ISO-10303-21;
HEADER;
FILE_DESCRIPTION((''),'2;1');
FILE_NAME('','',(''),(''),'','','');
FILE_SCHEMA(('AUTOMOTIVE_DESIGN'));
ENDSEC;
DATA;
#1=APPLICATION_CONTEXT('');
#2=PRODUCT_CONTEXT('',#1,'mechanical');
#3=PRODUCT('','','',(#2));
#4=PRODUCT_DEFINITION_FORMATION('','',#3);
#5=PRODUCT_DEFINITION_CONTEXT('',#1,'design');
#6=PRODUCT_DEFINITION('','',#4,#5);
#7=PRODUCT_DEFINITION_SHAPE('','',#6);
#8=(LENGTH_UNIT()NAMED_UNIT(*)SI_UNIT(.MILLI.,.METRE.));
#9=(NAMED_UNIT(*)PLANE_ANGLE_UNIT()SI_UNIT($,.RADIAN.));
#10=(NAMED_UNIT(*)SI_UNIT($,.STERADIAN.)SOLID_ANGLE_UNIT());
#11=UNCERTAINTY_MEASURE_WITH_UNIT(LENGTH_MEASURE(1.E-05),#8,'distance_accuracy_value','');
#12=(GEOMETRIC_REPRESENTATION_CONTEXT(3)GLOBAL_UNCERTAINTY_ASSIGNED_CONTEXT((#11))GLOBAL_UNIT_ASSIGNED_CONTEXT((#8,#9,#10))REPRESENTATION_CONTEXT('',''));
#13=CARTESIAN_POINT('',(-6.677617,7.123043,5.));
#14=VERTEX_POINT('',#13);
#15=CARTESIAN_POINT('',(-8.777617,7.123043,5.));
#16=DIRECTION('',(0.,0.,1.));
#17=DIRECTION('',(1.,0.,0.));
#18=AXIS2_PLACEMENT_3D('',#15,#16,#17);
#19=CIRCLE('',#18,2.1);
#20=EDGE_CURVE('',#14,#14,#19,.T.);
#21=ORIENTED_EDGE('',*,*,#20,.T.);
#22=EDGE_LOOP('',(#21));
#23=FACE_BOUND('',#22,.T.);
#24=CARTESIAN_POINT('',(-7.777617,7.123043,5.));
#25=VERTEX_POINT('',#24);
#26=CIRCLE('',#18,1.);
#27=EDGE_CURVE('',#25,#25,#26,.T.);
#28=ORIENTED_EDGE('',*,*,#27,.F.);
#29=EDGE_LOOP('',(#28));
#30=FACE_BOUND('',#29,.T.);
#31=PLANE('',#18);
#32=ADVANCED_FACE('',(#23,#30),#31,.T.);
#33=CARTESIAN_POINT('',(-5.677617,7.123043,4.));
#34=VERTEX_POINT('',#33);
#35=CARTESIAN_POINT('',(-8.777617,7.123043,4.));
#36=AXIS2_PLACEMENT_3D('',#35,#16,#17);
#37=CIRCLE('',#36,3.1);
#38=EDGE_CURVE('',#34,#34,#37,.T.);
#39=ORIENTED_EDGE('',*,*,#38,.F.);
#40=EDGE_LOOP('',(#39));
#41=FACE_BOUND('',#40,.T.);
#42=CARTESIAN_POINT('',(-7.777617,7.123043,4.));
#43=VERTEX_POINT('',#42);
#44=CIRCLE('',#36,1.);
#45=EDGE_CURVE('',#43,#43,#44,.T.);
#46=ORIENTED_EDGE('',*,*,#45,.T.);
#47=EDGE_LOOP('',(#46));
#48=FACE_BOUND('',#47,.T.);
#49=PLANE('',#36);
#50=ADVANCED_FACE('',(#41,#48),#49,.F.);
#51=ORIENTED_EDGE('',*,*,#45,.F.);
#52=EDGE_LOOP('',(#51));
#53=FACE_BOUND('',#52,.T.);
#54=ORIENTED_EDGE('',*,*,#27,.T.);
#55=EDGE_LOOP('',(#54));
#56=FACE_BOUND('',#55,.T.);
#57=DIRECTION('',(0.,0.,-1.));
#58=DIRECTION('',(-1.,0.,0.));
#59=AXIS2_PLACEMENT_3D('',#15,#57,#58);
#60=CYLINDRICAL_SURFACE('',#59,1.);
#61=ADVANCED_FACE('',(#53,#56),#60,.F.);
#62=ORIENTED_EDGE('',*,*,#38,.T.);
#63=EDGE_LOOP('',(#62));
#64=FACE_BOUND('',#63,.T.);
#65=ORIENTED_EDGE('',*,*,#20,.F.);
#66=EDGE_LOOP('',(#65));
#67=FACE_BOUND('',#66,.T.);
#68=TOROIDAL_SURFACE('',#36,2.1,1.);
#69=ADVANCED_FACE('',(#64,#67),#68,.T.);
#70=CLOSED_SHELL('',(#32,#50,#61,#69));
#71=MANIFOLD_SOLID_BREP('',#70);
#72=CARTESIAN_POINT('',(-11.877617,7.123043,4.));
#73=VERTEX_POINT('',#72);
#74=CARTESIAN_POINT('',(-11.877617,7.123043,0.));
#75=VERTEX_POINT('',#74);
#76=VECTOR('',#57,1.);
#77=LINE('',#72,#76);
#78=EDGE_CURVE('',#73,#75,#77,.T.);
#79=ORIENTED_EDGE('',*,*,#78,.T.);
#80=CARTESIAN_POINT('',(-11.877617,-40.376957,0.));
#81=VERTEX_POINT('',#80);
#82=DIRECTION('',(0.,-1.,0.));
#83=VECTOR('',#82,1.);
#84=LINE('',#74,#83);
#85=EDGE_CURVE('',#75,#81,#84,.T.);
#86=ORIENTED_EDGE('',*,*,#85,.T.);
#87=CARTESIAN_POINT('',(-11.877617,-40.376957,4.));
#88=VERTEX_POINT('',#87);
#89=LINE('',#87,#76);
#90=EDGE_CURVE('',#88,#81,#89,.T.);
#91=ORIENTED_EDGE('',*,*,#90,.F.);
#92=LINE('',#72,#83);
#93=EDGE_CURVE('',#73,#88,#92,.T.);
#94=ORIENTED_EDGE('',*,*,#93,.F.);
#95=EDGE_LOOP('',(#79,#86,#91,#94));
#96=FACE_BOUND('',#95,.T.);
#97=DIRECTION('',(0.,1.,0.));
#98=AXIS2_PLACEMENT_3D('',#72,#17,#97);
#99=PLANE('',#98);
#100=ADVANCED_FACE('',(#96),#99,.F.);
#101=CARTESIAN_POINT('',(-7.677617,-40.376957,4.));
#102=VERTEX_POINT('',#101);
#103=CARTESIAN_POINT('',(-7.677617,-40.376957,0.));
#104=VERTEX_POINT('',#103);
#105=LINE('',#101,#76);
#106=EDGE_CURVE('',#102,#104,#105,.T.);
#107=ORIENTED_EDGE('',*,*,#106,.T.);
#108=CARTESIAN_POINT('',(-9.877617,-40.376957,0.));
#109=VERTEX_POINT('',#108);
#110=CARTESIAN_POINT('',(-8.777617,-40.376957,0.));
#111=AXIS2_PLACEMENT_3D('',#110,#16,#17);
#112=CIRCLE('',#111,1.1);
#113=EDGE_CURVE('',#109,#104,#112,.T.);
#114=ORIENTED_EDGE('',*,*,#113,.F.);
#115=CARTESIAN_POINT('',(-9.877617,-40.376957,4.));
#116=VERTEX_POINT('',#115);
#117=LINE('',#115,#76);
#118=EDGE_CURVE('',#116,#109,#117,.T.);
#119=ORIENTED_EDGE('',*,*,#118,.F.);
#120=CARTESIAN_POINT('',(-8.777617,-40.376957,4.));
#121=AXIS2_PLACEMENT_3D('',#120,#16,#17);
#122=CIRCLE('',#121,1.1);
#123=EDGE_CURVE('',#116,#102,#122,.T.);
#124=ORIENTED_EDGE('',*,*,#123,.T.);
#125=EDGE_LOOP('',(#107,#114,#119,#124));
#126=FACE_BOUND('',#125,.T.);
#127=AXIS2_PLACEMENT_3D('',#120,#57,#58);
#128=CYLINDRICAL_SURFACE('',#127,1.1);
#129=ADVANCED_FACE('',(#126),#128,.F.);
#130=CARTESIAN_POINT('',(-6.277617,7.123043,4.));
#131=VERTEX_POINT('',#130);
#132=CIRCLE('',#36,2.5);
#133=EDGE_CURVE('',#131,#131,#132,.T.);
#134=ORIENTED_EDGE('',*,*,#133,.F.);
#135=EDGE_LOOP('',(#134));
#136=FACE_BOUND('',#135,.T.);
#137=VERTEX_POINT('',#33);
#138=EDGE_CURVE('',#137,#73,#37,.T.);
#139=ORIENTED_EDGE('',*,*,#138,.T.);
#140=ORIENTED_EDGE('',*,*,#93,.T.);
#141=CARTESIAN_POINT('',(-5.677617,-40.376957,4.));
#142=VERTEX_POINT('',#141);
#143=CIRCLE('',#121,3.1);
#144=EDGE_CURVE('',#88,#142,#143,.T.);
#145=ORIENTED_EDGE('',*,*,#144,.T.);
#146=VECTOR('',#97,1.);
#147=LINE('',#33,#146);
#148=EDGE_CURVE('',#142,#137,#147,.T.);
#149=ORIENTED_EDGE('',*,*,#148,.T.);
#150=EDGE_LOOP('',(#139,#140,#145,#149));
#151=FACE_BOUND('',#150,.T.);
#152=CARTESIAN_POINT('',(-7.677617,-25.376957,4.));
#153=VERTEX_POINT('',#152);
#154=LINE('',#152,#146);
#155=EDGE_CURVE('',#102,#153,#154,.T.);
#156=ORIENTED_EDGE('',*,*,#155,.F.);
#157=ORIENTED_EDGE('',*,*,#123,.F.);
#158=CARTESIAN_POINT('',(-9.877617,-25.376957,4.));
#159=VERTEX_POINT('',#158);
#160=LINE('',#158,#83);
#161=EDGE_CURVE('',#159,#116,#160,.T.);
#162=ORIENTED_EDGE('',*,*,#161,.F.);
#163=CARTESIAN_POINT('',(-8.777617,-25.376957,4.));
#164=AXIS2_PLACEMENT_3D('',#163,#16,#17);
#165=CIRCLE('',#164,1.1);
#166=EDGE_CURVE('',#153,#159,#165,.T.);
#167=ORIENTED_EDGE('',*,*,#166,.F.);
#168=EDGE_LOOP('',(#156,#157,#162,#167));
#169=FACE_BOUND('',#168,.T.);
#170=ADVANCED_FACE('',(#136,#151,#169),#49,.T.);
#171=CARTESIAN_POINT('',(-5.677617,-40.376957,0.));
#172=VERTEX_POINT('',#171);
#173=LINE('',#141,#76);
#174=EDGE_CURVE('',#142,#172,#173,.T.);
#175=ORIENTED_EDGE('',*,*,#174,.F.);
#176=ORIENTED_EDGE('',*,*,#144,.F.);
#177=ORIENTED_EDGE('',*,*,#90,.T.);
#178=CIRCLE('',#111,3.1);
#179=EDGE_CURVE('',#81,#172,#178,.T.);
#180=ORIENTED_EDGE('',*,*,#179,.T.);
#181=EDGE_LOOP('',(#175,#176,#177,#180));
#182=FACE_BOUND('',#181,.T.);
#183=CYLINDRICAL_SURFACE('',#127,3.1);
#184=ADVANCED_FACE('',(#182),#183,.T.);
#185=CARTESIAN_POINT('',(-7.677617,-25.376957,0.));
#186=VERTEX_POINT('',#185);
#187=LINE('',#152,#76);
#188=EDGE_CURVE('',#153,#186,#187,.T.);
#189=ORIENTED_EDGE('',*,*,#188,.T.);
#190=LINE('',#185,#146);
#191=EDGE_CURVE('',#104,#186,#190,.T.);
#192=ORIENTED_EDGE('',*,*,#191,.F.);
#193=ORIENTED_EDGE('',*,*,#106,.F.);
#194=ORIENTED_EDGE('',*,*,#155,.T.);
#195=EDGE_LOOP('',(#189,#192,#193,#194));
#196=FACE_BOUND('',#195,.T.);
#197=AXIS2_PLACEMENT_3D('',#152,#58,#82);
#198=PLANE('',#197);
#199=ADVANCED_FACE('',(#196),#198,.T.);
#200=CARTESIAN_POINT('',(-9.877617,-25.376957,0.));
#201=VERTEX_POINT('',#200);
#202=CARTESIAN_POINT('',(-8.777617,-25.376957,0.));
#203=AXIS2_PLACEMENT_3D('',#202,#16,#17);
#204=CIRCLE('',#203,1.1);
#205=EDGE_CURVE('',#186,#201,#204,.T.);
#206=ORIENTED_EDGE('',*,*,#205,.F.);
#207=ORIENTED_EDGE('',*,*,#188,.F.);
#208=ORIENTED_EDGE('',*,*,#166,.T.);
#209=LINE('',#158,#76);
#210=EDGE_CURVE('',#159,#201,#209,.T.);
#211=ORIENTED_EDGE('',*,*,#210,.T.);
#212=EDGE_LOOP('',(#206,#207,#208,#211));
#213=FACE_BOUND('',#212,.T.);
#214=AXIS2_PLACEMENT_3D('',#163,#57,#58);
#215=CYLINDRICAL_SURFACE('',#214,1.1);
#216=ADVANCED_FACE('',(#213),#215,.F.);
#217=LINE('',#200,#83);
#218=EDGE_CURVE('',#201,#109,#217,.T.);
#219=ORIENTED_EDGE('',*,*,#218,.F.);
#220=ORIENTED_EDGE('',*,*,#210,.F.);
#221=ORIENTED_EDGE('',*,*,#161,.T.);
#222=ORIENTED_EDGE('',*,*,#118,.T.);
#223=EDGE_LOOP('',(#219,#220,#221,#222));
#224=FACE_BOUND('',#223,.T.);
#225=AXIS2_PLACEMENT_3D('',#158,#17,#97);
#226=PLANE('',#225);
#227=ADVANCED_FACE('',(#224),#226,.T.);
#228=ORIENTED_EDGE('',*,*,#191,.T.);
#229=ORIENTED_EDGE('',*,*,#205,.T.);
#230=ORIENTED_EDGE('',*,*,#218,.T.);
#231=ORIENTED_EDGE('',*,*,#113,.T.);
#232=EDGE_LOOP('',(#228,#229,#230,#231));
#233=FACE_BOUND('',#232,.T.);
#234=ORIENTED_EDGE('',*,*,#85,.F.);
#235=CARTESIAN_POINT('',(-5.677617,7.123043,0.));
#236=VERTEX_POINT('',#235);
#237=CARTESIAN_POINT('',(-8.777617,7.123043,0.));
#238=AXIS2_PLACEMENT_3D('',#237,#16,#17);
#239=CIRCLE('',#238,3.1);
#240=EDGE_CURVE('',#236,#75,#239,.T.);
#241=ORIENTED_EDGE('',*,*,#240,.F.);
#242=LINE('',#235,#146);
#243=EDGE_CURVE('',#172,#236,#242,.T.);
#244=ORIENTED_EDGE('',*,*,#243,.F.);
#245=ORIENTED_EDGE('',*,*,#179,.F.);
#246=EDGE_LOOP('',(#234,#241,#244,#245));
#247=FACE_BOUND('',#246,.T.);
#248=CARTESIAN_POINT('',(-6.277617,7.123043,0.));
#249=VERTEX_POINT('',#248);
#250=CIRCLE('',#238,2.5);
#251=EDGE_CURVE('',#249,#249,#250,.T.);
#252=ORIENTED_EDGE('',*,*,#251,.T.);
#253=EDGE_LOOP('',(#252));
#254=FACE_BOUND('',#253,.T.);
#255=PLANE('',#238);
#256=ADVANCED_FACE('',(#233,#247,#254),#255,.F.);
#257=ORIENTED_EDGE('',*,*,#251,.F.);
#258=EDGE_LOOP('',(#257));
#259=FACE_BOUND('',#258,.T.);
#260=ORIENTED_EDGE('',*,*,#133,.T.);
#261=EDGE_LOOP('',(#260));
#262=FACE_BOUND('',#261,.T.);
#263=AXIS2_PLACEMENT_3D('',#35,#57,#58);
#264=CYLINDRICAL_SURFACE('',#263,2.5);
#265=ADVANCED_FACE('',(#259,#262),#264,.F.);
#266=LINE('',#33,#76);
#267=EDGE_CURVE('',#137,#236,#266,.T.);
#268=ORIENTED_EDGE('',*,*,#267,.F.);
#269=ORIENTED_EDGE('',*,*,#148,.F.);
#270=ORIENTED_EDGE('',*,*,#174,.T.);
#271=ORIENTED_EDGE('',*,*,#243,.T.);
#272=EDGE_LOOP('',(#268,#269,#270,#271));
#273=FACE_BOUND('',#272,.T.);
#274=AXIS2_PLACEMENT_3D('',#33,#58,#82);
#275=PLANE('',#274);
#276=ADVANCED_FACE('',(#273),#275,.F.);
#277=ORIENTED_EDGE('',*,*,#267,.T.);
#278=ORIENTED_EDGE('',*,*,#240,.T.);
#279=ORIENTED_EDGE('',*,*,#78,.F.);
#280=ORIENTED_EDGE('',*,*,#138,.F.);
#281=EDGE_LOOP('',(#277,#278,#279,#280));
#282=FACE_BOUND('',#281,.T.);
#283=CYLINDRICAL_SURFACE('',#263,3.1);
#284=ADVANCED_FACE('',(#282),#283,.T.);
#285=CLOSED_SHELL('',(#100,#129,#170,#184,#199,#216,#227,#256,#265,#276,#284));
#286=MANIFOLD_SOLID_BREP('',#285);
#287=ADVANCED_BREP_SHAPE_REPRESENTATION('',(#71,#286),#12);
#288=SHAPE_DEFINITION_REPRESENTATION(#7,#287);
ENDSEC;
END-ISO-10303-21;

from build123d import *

# Parameters (mm, degrees)
SKETCH1_R           = 2.5
BOSS_EXTRUDE1_DEPTH = 4
SKETCH2_R           = 3.1
SKETCH2_R_2         = 1
BOSS_EXTRUDE2_DEPTH = 1
FILLET1_R           = 1


with BuildPart() as part:
    # Sketch1 → Boss-Extrude1 (new body)
    with BuildSketch(Plane.XY):
        with BuildLine():
            Line((-5.677617002, 7.123043478), (-5.677617002, -40.376956522))
            ThreePointArc((-5.677617002, -40.376956522), (-8.777617002, -43.476956522), (-11.877617002, -40.376956522))
            Line((-11.877617002, -40.376956522), (-11.877617002, 7.123043478))
            ThreePointArc((-11.877617002, 7.123043478), (-8.777617002, 10.223043478), (-5.677617002, 7.123043478))
        make_face()
        with Locations((-8.777617002, 7.123043478)):
            Circle(SKETCH1_R, mode=Mode.SUBTRACT)
        with BuildLine():
            Line((-7.677617002, -25.376956522), (-7.677617002, -40.376956522))
            ThreePointArc((-7.677617002, -40.376956522), (-8.777617002, -41.476956522), (-9.877617002, -40.376956522))
            Line((-9.877617002, -40.376956522), (-9.877617002, -25.376956522))
            ThreePointArc((-9.877617002, -25.376956522), (-8.777617002, -24.276956522), (-7.677617002, -25.376956522))
        make_face(mode=Mode.SUBTRACT)
    extrude(amount=BOSS_EXTRUDE1_DEPTH)


with BuildPart() as body_2:
    # Sketch2 → Boss-Extrude2 (new body)
    with BuildSketch(Plane.XY.offset(4)):
        with Locations((-8.777617002, 7.123043478)):
            Circle(SKETCH2_R)
        with Locations((-8.777617002, 7.123043478)):
            Circle(SKETCH2_R_2, mode=Mode.SUBTRACT)
    extrude(amount=BOSS_EXTRUDE2_DEPTH)

    # Fillet1
    fillet1_edges = [body_2.edges().sort_by_distance(p)[0] for p in [
        (-11.877617002, 7.123043478, 5),
    ]]
    fillet(fillet1_edges, radius=FILLET1_R - 0.0001)  # a hair under: the kernel refuses the full size


solid = Compound([part.part, body_2.part])
